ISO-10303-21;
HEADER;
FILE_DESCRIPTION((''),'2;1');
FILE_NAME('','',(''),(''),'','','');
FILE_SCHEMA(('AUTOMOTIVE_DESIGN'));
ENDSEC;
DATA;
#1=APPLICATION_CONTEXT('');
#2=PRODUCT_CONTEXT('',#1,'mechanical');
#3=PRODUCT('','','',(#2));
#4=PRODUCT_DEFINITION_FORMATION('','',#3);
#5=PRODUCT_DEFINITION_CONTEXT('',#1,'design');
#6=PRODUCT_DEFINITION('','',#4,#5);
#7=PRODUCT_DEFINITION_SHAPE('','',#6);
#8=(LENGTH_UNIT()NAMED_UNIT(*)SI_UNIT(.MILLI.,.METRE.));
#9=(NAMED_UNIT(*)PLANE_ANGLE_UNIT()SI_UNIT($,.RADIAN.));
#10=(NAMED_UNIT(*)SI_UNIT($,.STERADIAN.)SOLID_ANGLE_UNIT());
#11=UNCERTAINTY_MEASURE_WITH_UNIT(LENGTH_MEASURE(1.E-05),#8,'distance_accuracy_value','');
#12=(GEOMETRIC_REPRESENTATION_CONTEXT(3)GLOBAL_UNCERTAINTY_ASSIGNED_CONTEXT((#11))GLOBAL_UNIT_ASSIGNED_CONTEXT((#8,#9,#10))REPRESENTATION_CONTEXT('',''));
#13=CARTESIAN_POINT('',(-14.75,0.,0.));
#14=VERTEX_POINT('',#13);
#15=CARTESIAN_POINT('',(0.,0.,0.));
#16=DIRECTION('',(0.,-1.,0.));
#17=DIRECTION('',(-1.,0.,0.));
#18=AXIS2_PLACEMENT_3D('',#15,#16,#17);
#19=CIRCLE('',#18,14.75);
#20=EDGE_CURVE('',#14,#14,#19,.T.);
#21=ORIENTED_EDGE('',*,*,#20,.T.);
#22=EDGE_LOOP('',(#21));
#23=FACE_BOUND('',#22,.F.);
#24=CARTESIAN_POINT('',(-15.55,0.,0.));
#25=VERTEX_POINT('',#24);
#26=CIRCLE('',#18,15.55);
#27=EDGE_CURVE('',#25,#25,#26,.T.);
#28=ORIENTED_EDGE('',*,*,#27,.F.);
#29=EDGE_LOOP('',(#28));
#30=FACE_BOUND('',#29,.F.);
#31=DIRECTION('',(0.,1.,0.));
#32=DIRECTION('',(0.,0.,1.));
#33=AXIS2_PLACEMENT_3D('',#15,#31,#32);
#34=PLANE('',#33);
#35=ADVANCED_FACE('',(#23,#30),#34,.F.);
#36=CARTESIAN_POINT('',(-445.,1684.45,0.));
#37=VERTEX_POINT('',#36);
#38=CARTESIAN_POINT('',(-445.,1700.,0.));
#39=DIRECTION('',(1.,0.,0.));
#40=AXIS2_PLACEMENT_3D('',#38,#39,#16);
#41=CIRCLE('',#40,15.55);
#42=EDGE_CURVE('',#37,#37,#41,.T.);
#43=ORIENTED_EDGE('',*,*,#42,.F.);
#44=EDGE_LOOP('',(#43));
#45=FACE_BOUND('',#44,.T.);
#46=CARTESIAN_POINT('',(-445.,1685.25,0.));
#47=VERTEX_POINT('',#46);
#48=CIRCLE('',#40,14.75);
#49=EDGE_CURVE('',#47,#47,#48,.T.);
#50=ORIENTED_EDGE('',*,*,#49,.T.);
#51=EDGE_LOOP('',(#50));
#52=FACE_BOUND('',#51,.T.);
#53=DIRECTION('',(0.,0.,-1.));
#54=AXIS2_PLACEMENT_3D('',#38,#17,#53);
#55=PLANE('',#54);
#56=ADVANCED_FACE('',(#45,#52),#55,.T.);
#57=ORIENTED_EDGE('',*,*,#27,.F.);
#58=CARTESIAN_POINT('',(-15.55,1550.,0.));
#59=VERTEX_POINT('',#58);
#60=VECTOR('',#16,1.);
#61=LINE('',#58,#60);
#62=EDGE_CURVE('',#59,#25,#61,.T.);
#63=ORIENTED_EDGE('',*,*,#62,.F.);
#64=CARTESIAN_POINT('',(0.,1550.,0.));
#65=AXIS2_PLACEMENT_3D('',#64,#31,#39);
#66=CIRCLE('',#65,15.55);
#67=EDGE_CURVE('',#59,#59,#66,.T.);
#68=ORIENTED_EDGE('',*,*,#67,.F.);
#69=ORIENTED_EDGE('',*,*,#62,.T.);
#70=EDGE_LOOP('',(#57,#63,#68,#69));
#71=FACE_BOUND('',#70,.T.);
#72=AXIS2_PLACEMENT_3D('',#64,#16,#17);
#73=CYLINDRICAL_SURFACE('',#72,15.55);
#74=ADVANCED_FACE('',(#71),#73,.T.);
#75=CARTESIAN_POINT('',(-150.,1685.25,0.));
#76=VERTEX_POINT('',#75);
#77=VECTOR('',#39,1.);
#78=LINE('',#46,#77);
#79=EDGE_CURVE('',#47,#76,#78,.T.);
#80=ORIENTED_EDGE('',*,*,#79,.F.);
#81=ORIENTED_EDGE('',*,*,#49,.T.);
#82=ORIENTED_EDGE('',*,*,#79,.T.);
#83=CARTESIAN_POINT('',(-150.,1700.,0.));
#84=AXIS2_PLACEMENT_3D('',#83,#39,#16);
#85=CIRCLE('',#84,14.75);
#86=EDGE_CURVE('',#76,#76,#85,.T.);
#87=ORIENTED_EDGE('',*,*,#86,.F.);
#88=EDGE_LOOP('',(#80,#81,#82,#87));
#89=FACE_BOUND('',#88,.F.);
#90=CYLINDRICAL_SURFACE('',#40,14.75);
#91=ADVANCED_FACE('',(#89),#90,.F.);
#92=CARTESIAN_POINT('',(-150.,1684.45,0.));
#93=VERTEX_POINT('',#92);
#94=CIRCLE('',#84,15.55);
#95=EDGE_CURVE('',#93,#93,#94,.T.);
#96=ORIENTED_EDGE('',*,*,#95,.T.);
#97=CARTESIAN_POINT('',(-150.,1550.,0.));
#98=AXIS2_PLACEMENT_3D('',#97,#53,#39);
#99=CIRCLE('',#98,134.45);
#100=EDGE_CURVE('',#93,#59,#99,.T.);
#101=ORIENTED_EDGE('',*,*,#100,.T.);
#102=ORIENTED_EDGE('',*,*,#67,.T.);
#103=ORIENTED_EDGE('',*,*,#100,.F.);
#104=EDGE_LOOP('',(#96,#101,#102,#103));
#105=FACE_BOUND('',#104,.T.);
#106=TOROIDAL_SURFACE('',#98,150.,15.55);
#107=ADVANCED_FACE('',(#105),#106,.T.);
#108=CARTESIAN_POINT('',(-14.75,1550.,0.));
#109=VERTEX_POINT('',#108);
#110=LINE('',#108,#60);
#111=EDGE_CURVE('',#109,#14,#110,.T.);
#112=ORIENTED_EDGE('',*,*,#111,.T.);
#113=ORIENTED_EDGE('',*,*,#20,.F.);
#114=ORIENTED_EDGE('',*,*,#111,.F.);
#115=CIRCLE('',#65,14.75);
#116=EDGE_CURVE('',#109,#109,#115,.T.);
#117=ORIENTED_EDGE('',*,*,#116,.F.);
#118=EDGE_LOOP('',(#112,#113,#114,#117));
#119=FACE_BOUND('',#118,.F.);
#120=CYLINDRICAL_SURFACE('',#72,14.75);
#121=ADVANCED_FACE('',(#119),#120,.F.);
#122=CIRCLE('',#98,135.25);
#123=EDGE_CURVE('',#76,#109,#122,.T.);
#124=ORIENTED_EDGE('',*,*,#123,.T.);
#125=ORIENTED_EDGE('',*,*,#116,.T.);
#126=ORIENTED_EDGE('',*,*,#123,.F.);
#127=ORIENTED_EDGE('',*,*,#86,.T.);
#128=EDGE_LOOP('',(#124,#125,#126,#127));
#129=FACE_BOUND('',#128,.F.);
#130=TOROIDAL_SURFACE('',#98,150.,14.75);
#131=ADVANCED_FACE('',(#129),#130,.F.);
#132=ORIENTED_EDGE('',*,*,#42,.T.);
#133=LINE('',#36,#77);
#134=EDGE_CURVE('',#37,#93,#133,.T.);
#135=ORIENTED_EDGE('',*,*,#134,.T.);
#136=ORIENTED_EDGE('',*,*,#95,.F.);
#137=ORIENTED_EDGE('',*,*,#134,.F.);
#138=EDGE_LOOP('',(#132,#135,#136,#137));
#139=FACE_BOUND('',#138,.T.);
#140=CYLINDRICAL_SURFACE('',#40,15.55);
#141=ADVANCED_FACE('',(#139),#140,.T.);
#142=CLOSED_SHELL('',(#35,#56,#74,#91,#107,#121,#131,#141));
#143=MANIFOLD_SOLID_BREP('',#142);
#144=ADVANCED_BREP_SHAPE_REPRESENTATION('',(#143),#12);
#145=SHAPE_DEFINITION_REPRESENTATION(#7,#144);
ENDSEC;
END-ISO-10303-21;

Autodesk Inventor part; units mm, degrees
ref_plane "YZ Plane" through (0, 0, 0) normal (1, 0, 0) x (0, 1, 0)
ref_plane "XZ Plane" through (0, 0, 0) normal (0, 1, 0) x (-1, 0, 0)
ref_plane "XY Plane" through (0, 0, 0) normal (0, 0, 1) x (1, 0, 0)
sketch "Sketch1" plane through (0, 0, 0) normal (0, 1, 0) x (-1, 0, 0)
  circle A0 centre (0, 0) radius 15.55
  circle A1 centre (0, 0) radius 14.75
  dimension "d0" = 31.1
  dimension "d1" = 29.5
sketch "Sketch2" plane through (0, 0, 0) normal (0, 0, 1) x (1, 0, 0)
  line L0 (-445, 1700) -> (-150, 1700)
  line L1 (0, 1550) -> (0, 0)
  arc A0 (0, 1550) -> (-150, 1700) centre (-150, 1550) ccw
  point P0 (0, 1700)
  dimension "d4" = 445
  dimension "d6" = 150
  dimension "d9" = 1700
sweep "Sweep1" add profiles "Sketch1" path "Sketch2"
properties part number "tubo2-D19.05" material "Acero, carbono"
